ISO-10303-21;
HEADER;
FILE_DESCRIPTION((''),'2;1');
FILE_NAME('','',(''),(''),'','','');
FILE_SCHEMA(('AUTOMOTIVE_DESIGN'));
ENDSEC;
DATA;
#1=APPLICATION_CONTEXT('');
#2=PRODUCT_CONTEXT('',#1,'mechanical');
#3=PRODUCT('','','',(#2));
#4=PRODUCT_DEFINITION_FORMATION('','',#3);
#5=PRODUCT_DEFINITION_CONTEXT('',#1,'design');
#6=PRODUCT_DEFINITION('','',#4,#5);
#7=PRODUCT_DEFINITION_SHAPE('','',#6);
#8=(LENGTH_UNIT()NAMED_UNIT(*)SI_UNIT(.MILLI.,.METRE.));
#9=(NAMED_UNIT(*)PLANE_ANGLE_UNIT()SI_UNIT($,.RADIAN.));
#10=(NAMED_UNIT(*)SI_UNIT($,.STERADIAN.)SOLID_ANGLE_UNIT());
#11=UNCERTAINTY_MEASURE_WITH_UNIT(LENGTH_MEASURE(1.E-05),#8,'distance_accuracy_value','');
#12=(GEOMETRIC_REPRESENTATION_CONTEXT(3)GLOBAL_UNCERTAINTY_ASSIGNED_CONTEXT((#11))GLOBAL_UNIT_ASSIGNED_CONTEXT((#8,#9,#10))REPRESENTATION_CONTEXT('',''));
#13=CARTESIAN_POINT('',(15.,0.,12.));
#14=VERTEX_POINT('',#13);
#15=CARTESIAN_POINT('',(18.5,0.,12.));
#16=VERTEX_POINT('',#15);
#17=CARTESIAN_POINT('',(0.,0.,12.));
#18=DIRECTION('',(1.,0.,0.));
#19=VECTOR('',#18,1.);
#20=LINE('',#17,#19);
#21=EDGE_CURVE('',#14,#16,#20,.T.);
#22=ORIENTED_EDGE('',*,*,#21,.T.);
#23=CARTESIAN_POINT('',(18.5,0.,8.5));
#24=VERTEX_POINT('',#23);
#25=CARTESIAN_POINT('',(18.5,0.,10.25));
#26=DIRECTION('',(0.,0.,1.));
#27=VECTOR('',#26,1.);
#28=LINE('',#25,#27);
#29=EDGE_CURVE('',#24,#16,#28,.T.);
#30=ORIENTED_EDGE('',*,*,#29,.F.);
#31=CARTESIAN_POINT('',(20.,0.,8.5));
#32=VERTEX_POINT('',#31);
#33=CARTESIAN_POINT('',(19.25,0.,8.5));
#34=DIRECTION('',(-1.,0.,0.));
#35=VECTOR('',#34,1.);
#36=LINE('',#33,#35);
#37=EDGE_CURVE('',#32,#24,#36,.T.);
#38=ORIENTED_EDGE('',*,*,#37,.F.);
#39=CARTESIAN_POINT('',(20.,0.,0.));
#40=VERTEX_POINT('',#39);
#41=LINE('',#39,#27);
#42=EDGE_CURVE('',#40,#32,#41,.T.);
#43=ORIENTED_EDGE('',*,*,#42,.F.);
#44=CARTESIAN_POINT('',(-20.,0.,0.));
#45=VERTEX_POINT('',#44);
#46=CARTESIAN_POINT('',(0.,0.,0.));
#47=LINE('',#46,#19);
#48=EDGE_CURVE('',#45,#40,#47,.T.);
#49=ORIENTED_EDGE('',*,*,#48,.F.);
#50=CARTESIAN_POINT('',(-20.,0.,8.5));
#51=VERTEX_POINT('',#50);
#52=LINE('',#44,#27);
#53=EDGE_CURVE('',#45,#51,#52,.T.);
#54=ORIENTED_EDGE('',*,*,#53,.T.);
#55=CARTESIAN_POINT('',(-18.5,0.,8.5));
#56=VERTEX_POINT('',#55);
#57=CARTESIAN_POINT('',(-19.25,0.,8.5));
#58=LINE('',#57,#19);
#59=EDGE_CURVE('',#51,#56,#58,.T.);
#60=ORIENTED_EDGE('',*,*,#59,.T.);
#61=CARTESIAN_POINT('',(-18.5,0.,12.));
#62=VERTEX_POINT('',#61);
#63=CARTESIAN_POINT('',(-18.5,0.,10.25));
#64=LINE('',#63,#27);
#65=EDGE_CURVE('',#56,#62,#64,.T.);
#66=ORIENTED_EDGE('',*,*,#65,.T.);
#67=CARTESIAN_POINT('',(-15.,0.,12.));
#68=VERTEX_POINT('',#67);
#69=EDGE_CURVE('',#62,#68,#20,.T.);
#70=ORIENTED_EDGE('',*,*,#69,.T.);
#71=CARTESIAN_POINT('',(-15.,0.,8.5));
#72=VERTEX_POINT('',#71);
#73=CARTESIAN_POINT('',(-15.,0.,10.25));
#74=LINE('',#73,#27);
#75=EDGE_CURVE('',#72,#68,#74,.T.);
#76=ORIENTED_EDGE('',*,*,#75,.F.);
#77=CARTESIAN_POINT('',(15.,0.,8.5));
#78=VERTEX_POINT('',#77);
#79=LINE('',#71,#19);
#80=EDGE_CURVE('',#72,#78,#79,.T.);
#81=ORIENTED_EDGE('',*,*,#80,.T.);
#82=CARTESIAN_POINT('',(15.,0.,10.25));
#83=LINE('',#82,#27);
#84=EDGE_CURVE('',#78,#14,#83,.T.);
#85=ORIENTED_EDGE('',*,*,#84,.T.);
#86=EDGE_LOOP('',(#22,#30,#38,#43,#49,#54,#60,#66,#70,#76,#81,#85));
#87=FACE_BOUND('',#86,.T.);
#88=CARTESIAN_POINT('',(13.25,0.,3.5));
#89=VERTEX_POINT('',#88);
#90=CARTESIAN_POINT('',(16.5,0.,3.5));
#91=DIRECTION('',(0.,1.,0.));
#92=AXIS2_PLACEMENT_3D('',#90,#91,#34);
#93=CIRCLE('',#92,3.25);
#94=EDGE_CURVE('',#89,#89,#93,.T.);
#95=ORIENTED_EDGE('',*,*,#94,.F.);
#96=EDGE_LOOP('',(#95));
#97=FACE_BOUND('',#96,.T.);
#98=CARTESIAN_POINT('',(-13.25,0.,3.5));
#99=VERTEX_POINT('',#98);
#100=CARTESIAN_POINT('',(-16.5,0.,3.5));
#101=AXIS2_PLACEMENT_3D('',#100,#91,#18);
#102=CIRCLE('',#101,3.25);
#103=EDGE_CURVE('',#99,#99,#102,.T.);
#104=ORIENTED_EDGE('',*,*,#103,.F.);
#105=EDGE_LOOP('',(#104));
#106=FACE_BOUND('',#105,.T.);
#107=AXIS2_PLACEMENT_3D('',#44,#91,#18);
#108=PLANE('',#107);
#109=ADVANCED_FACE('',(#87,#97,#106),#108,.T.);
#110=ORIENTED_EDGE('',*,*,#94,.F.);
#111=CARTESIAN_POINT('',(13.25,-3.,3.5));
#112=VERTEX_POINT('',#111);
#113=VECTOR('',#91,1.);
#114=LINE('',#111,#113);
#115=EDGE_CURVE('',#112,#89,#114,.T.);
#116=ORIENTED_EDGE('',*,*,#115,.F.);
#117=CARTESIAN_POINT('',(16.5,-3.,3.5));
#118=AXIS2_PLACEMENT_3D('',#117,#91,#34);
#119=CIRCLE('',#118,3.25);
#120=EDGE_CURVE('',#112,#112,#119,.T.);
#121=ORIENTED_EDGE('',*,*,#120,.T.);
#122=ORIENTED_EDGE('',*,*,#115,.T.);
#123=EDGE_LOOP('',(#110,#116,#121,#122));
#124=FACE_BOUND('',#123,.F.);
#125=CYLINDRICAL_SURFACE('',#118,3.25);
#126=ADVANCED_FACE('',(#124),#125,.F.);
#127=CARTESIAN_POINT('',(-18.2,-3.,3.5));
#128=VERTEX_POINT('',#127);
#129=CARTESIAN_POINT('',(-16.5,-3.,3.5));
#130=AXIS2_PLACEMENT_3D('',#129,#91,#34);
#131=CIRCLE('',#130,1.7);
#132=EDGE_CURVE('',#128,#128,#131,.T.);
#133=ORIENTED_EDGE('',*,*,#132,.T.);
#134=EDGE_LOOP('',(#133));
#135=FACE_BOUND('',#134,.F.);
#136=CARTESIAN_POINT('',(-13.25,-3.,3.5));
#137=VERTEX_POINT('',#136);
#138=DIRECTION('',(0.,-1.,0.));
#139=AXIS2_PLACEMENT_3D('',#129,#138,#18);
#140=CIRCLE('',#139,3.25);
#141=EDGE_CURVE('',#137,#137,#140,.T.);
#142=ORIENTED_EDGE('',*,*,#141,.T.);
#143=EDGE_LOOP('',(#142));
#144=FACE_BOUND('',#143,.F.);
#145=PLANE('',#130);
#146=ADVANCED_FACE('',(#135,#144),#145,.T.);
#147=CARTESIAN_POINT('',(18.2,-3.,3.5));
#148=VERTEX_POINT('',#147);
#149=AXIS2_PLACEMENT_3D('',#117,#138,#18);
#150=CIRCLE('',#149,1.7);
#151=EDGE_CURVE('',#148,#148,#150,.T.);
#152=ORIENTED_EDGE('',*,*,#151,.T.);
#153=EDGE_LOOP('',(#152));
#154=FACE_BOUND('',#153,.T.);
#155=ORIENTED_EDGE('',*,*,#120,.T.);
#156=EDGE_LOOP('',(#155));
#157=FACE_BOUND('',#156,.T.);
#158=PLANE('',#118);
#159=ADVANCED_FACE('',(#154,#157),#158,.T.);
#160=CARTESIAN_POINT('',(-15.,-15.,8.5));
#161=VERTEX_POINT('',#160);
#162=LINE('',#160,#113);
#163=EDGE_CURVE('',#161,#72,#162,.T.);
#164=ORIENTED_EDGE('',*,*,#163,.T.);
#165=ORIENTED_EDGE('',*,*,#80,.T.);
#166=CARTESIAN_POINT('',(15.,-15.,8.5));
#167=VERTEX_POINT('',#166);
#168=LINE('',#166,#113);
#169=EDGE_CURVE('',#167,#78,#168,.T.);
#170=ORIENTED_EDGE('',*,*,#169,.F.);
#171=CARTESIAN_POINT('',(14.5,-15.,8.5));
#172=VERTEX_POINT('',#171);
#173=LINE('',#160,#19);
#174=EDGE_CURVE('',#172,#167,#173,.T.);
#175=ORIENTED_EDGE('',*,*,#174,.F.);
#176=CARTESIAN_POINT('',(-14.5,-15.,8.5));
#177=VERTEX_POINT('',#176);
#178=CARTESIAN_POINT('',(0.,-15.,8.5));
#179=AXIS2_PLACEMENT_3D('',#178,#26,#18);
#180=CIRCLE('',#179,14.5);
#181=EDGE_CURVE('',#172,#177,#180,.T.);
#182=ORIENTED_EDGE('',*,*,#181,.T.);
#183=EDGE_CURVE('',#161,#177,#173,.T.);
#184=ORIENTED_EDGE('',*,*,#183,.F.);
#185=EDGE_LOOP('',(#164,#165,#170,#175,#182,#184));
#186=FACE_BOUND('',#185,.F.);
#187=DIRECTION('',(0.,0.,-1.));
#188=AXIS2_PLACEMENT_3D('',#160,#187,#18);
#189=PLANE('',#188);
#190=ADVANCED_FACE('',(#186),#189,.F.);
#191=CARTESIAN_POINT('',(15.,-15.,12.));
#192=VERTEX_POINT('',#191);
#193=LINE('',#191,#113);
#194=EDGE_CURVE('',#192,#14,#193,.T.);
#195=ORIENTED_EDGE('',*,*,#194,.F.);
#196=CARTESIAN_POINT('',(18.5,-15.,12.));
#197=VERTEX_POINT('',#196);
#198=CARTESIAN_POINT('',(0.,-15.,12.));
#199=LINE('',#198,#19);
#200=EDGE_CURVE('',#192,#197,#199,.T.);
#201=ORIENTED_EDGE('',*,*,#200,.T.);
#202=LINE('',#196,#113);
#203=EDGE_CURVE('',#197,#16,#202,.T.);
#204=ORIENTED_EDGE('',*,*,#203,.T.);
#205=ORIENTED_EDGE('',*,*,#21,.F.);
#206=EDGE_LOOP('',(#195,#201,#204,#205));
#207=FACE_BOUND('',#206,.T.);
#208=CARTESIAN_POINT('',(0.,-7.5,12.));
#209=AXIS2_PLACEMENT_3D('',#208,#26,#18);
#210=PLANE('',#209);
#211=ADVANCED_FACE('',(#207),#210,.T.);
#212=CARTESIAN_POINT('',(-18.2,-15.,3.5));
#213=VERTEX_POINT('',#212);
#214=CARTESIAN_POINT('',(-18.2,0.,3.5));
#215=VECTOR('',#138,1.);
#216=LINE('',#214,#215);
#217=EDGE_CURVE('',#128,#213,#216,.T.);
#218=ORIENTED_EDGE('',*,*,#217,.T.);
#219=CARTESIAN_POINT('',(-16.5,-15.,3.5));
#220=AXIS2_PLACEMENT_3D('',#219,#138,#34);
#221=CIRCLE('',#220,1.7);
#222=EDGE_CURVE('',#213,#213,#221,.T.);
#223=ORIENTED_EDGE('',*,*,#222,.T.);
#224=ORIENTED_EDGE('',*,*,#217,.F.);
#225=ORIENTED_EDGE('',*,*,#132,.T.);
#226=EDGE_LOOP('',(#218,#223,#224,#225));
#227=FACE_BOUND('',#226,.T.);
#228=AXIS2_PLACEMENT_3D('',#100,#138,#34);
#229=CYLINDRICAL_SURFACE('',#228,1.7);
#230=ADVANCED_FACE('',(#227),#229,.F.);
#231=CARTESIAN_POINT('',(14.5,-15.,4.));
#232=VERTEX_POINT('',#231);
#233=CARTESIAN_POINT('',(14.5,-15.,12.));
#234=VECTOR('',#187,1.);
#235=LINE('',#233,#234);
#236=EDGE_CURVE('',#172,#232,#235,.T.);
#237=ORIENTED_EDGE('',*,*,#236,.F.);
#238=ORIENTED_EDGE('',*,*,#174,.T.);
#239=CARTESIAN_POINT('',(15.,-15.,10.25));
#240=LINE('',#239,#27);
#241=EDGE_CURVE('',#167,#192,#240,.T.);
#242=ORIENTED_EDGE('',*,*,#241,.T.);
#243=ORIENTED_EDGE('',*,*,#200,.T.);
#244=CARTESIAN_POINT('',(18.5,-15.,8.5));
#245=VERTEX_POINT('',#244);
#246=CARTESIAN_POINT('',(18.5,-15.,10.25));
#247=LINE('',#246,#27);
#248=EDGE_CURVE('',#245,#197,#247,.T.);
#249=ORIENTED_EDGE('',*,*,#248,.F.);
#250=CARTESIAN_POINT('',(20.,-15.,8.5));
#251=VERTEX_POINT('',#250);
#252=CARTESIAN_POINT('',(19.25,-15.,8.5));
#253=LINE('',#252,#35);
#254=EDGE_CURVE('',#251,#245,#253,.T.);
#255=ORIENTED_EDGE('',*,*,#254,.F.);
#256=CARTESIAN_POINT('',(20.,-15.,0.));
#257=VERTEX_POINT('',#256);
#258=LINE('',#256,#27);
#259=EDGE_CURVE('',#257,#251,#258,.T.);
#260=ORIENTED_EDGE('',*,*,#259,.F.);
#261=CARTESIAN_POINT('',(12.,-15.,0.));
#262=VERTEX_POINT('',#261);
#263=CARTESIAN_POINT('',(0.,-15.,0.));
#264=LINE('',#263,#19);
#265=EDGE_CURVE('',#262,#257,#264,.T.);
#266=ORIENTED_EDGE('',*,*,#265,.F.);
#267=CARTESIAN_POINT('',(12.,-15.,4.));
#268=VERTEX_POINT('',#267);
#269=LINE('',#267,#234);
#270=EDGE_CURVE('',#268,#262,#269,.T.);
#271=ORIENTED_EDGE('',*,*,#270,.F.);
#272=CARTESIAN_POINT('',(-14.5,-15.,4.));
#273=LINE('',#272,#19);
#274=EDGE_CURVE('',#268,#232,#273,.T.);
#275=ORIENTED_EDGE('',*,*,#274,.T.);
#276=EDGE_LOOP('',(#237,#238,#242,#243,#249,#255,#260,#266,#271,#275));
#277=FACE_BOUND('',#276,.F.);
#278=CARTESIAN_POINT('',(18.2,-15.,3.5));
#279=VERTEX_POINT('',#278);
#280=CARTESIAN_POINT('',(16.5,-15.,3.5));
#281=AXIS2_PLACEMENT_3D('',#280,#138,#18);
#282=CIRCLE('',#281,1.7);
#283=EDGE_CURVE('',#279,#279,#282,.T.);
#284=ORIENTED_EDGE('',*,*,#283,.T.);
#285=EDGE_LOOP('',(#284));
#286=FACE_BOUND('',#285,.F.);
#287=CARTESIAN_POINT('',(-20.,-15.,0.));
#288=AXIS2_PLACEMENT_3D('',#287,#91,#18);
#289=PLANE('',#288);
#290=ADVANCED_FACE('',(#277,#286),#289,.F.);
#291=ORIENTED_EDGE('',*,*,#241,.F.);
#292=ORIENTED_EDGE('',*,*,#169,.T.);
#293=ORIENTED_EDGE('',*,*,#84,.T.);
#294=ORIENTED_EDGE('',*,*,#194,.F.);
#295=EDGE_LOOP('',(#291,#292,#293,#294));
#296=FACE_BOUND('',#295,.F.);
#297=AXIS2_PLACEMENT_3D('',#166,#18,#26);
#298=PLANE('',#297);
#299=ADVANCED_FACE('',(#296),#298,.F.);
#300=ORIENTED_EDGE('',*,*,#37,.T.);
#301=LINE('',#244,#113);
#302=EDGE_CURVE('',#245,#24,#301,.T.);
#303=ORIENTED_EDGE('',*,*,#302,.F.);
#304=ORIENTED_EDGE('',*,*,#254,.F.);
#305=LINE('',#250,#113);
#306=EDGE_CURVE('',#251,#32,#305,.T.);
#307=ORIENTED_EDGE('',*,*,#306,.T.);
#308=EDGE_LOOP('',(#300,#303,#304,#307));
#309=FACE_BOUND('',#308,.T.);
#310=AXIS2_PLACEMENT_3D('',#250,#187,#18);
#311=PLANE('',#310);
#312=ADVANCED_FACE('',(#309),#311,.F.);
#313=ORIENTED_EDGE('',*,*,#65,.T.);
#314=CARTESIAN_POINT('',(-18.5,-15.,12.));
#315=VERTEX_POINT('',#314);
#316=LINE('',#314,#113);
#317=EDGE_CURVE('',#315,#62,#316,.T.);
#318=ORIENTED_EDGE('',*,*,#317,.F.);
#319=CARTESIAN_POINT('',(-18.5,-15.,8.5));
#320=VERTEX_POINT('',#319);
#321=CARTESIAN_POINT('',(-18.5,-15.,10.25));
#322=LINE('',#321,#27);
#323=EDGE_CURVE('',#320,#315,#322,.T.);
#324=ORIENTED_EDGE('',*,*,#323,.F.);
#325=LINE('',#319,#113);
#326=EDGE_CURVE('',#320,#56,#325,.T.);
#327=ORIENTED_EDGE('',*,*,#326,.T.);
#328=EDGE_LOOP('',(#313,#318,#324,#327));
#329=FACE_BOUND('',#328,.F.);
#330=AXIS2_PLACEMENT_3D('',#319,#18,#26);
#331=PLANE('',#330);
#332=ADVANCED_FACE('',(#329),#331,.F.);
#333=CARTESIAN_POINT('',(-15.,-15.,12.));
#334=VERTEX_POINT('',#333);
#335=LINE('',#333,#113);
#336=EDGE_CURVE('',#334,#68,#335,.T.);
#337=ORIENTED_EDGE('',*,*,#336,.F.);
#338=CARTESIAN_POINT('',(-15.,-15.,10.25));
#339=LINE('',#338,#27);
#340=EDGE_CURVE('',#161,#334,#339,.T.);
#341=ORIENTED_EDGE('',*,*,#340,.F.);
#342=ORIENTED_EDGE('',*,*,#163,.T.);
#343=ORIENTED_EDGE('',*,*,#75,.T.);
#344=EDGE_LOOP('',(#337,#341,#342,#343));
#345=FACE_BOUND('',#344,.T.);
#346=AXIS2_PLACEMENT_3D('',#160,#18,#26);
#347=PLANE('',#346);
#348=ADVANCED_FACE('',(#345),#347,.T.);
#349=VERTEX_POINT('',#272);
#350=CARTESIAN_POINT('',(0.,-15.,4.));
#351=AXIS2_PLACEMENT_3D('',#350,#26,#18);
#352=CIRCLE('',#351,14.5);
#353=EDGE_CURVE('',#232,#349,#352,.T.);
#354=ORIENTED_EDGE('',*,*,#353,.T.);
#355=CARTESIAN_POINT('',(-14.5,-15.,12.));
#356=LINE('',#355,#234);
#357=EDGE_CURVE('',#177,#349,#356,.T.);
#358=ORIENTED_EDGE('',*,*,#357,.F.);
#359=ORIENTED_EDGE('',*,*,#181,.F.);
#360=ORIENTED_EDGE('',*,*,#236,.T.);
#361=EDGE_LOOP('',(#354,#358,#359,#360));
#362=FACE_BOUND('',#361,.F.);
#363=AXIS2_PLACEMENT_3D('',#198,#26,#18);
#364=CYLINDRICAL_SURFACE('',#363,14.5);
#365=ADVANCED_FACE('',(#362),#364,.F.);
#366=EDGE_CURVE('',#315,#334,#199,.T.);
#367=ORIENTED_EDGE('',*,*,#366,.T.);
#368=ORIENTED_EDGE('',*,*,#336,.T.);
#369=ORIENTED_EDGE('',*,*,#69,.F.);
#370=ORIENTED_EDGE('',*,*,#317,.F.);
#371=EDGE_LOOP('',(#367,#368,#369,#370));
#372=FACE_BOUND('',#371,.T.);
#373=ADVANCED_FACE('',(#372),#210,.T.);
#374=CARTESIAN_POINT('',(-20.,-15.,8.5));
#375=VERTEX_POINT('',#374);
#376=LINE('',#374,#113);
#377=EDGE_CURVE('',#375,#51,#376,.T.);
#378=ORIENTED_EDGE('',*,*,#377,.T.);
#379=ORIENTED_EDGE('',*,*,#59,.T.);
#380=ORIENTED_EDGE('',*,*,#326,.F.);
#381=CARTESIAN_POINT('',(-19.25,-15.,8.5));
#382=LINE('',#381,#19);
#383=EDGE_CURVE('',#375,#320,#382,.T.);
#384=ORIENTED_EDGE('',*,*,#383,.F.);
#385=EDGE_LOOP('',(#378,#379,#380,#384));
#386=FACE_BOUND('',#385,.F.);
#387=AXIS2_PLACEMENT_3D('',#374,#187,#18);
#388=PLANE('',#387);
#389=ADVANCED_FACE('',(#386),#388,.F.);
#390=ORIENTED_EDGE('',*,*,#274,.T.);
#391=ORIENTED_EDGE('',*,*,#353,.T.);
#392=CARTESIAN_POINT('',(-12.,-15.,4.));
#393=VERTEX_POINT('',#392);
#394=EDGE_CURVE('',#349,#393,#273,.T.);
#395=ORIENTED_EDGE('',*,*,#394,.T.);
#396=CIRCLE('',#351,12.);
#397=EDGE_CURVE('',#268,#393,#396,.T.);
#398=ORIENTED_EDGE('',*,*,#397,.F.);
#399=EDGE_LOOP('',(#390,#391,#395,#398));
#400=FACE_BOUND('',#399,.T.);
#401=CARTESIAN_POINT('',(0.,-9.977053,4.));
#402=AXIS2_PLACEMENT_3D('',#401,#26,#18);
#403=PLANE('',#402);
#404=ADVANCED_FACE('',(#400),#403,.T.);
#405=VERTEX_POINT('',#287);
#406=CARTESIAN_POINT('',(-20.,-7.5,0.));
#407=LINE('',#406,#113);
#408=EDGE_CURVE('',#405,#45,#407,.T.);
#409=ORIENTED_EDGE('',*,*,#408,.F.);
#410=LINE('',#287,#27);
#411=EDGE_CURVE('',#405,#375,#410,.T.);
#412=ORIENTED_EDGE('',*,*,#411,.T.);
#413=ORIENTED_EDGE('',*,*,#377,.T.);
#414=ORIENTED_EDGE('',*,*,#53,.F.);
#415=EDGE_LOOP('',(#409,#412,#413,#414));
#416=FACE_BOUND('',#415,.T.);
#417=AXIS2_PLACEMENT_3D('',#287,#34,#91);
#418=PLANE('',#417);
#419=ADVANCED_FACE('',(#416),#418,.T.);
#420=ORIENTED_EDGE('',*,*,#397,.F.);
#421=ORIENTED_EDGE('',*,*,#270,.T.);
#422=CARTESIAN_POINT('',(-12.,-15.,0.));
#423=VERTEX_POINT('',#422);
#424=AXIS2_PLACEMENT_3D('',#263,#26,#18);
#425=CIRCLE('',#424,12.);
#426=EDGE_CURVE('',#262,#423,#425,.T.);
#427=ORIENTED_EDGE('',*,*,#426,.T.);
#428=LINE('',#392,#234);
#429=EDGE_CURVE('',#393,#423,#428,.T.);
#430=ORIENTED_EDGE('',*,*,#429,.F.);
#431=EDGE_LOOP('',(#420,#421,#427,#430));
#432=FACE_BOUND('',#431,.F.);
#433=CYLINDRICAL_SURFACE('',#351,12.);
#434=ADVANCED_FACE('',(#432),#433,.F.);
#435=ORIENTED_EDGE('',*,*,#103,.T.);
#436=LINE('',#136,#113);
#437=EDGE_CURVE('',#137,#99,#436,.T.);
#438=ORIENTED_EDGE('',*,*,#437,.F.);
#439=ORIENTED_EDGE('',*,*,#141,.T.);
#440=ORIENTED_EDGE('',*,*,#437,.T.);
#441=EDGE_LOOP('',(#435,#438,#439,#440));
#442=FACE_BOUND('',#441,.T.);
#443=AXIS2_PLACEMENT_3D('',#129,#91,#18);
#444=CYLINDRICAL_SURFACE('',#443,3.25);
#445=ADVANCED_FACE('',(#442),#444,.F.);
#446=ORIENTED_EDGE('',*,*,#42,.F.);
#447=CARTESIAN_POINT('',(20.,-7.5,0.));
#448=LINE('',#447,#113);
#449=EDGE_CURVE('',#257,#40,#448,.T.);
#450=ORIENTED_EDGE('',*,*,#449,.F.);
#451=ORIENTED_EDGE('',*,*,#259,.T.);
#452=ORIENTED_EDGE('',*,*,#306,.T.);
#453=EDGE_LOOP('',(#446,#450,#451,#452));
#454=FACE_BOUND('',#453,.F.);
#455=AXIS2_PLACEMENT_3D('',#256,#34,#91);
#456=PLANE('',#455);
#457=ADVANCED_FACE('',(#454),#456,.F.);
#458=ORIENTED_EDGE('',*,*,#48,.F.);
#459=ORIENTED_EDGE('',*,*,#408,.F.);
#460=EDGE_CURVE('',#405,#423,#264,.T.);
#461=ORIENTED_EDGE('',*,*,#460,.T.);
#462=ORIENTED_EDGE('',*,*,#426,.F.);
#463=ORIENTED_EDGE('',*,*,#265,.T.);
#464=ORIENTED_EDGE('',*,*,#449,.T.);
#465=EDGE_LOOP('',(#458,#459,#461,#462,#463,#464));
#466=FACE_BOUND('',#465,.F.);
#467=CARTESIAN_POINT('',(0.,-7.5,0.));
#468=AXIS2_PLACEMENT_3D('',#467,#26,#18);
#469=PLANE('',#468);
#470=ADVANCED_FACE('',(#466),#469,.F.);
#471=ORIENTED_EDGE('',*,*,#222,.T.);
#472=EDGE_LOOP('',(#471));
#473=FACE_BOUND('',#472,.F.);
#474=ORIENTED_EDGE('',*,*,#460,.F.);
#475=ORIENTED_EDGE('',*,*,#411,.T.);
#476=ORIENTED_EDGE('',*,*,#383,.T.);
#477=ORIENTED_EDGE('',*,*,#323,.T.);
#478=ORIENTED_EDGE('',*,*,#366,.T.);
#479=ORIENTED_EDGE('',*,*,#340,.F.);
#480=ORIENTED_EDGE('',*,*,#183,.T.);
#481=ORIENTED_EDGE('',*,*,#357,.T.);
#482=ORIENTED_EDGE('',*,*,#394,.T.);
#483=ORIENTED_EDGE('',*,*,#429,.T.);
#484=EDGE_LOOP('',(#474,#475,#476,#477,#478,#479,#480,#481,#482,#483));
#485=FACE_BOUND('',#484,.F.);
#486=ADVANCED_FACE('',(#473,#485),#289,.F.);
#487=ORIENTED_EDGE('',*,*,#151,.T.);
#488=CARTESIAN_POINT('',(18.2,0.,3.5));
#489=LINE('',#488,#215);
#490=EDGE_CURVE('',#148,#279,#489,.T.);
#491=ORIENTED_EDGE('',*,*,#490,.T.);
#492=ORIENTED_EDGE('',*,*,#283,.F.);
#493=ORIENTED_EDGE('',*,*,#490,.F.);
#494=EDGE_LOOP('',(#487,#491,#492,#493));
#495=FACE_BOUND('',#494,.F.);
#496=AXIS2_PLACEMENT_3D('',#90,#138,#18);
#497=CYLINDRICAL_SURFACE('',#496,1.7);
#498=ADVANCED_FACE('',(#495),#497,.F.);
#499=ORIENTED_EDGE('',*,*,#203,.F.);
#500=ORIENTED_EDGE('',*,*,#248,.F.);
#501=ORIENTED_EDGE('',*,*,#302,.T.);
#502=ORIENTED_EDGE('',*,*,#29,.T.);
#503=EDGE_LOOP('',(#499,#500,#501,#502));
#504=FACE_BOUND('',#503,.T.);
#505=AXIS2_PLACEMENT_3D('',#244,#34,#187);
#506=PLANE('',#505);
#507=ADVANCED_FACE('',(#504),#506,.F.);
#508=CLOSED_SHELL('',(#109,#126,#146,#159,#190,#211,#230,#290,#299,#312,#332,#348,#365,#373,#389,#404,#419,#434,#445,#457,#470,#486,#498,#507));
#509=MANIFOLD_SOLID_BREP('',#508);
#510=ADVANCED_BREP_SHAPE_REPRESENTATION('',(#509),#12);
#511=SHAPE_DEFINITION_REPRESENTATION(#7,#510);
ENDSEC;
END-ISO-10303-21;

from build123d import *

# Parameters (mm, degrees)
F0_W            = 40
F0_H            = 15
F1_DEPTH        = 12
F3_DEPTH        = 8
F5_DEPTH        = 4
F6_W            = 1.5
F6_H            = 3.5
F7_DEPTH        = 15
F8_W            = 0.5
F8_H            = 3.5
F8_W_2          = 29.5
F9_DEPTH        = 15
F11_D           = 3.4
F11_CBORE_D     = 6.5
F11_CBORE_DEPTH = 3


# Not quite as in the source:
# - a pattern or mirror of a feature is missing from the dataset's text; its kind, count and spacing are read off the source's solid


with BuildPart() as f1:
    # F0 (on Top) → F1 (new body)
    with BuildSketch(Plane.XY):
        with Locations((0, -7.5)):
            Rectangle(F0_W, F0_H)
    extrude(amount=F1_DEPTH)

    # F2 (on face) → F3 (cut)
    with BuildSketch(Plane.XY.offset(12)):
        with BuildLine():
            Line((-14.5, -15), (14.5, -15))
            ThreePointArc((14.5, -15), (0, -0.5), (-14.5, -15))
        make_face()
    extrude(amount=-F3_DEPTH, mode=Mode.SUBTRACT)

    # F4 (on face) → F5 (cut, through all)
    with BuildSketch(Plane.XY.offset(4)):
        with BuildLine():
            Line((-12, -15), (12, -15))
            ThreePointArc((12, -15), (0, -3), (-12, -15))
        make_face()
    extrude(amount=-F5_DEPTH, mode=Mode.SUBTRACT)

    # F6 (on face) → F7 (cut, through all)
    with BuildSketch(Plane.XZ.offset(15)):
        with Locations((-19.25, 10.25)):
            Rectangle(F6_W, F6_H)
    f7 = extrude(amount=-F7_DEPTH, mode=Mode.SUBTRACT)

    # F7_copies: F7 across plane
    add(f7.mirror(Plane(origin=(0, 0, 0), x_dir=(0, 0, 1), z_dir=(1, 0, 0))), mode=Mode.SUBTRACT)

    # F8 (on face) → F9 (cut, through all)
    with BuildSketch(Plane.XZ.offset(15)):
        with Locations((-14.75, 10.25)):
            Rectangle(F8_W, F8_H)
        with Locations((0.25, 10.25)):
            Rectangle(F8_W_2, F8_H)
    extrude(amount=-F9_DEPTH, mode=Mode.SUBTRACT)

    # F11 (through all)
    with Locations(Plane(origin=(0, 0, 0), x_dir=(-1, 0, 0), z_dir=(0, 1, 0))):
        with Locations((-16.5, 3.5)):
            f11 = CounterBoreHole(F11_D / 2, F11_CBORE_D / 2, F11_CBORE_DEPTH)

    # F11_copies: F11 across plane
    add(f11.mirror(Plane(origin=(0, 0, 0), x_dir=(0, 0, -1), z_dir=(-1, 0, 0))), mode=Mode.SUBTRACT)


solid = f1.part
